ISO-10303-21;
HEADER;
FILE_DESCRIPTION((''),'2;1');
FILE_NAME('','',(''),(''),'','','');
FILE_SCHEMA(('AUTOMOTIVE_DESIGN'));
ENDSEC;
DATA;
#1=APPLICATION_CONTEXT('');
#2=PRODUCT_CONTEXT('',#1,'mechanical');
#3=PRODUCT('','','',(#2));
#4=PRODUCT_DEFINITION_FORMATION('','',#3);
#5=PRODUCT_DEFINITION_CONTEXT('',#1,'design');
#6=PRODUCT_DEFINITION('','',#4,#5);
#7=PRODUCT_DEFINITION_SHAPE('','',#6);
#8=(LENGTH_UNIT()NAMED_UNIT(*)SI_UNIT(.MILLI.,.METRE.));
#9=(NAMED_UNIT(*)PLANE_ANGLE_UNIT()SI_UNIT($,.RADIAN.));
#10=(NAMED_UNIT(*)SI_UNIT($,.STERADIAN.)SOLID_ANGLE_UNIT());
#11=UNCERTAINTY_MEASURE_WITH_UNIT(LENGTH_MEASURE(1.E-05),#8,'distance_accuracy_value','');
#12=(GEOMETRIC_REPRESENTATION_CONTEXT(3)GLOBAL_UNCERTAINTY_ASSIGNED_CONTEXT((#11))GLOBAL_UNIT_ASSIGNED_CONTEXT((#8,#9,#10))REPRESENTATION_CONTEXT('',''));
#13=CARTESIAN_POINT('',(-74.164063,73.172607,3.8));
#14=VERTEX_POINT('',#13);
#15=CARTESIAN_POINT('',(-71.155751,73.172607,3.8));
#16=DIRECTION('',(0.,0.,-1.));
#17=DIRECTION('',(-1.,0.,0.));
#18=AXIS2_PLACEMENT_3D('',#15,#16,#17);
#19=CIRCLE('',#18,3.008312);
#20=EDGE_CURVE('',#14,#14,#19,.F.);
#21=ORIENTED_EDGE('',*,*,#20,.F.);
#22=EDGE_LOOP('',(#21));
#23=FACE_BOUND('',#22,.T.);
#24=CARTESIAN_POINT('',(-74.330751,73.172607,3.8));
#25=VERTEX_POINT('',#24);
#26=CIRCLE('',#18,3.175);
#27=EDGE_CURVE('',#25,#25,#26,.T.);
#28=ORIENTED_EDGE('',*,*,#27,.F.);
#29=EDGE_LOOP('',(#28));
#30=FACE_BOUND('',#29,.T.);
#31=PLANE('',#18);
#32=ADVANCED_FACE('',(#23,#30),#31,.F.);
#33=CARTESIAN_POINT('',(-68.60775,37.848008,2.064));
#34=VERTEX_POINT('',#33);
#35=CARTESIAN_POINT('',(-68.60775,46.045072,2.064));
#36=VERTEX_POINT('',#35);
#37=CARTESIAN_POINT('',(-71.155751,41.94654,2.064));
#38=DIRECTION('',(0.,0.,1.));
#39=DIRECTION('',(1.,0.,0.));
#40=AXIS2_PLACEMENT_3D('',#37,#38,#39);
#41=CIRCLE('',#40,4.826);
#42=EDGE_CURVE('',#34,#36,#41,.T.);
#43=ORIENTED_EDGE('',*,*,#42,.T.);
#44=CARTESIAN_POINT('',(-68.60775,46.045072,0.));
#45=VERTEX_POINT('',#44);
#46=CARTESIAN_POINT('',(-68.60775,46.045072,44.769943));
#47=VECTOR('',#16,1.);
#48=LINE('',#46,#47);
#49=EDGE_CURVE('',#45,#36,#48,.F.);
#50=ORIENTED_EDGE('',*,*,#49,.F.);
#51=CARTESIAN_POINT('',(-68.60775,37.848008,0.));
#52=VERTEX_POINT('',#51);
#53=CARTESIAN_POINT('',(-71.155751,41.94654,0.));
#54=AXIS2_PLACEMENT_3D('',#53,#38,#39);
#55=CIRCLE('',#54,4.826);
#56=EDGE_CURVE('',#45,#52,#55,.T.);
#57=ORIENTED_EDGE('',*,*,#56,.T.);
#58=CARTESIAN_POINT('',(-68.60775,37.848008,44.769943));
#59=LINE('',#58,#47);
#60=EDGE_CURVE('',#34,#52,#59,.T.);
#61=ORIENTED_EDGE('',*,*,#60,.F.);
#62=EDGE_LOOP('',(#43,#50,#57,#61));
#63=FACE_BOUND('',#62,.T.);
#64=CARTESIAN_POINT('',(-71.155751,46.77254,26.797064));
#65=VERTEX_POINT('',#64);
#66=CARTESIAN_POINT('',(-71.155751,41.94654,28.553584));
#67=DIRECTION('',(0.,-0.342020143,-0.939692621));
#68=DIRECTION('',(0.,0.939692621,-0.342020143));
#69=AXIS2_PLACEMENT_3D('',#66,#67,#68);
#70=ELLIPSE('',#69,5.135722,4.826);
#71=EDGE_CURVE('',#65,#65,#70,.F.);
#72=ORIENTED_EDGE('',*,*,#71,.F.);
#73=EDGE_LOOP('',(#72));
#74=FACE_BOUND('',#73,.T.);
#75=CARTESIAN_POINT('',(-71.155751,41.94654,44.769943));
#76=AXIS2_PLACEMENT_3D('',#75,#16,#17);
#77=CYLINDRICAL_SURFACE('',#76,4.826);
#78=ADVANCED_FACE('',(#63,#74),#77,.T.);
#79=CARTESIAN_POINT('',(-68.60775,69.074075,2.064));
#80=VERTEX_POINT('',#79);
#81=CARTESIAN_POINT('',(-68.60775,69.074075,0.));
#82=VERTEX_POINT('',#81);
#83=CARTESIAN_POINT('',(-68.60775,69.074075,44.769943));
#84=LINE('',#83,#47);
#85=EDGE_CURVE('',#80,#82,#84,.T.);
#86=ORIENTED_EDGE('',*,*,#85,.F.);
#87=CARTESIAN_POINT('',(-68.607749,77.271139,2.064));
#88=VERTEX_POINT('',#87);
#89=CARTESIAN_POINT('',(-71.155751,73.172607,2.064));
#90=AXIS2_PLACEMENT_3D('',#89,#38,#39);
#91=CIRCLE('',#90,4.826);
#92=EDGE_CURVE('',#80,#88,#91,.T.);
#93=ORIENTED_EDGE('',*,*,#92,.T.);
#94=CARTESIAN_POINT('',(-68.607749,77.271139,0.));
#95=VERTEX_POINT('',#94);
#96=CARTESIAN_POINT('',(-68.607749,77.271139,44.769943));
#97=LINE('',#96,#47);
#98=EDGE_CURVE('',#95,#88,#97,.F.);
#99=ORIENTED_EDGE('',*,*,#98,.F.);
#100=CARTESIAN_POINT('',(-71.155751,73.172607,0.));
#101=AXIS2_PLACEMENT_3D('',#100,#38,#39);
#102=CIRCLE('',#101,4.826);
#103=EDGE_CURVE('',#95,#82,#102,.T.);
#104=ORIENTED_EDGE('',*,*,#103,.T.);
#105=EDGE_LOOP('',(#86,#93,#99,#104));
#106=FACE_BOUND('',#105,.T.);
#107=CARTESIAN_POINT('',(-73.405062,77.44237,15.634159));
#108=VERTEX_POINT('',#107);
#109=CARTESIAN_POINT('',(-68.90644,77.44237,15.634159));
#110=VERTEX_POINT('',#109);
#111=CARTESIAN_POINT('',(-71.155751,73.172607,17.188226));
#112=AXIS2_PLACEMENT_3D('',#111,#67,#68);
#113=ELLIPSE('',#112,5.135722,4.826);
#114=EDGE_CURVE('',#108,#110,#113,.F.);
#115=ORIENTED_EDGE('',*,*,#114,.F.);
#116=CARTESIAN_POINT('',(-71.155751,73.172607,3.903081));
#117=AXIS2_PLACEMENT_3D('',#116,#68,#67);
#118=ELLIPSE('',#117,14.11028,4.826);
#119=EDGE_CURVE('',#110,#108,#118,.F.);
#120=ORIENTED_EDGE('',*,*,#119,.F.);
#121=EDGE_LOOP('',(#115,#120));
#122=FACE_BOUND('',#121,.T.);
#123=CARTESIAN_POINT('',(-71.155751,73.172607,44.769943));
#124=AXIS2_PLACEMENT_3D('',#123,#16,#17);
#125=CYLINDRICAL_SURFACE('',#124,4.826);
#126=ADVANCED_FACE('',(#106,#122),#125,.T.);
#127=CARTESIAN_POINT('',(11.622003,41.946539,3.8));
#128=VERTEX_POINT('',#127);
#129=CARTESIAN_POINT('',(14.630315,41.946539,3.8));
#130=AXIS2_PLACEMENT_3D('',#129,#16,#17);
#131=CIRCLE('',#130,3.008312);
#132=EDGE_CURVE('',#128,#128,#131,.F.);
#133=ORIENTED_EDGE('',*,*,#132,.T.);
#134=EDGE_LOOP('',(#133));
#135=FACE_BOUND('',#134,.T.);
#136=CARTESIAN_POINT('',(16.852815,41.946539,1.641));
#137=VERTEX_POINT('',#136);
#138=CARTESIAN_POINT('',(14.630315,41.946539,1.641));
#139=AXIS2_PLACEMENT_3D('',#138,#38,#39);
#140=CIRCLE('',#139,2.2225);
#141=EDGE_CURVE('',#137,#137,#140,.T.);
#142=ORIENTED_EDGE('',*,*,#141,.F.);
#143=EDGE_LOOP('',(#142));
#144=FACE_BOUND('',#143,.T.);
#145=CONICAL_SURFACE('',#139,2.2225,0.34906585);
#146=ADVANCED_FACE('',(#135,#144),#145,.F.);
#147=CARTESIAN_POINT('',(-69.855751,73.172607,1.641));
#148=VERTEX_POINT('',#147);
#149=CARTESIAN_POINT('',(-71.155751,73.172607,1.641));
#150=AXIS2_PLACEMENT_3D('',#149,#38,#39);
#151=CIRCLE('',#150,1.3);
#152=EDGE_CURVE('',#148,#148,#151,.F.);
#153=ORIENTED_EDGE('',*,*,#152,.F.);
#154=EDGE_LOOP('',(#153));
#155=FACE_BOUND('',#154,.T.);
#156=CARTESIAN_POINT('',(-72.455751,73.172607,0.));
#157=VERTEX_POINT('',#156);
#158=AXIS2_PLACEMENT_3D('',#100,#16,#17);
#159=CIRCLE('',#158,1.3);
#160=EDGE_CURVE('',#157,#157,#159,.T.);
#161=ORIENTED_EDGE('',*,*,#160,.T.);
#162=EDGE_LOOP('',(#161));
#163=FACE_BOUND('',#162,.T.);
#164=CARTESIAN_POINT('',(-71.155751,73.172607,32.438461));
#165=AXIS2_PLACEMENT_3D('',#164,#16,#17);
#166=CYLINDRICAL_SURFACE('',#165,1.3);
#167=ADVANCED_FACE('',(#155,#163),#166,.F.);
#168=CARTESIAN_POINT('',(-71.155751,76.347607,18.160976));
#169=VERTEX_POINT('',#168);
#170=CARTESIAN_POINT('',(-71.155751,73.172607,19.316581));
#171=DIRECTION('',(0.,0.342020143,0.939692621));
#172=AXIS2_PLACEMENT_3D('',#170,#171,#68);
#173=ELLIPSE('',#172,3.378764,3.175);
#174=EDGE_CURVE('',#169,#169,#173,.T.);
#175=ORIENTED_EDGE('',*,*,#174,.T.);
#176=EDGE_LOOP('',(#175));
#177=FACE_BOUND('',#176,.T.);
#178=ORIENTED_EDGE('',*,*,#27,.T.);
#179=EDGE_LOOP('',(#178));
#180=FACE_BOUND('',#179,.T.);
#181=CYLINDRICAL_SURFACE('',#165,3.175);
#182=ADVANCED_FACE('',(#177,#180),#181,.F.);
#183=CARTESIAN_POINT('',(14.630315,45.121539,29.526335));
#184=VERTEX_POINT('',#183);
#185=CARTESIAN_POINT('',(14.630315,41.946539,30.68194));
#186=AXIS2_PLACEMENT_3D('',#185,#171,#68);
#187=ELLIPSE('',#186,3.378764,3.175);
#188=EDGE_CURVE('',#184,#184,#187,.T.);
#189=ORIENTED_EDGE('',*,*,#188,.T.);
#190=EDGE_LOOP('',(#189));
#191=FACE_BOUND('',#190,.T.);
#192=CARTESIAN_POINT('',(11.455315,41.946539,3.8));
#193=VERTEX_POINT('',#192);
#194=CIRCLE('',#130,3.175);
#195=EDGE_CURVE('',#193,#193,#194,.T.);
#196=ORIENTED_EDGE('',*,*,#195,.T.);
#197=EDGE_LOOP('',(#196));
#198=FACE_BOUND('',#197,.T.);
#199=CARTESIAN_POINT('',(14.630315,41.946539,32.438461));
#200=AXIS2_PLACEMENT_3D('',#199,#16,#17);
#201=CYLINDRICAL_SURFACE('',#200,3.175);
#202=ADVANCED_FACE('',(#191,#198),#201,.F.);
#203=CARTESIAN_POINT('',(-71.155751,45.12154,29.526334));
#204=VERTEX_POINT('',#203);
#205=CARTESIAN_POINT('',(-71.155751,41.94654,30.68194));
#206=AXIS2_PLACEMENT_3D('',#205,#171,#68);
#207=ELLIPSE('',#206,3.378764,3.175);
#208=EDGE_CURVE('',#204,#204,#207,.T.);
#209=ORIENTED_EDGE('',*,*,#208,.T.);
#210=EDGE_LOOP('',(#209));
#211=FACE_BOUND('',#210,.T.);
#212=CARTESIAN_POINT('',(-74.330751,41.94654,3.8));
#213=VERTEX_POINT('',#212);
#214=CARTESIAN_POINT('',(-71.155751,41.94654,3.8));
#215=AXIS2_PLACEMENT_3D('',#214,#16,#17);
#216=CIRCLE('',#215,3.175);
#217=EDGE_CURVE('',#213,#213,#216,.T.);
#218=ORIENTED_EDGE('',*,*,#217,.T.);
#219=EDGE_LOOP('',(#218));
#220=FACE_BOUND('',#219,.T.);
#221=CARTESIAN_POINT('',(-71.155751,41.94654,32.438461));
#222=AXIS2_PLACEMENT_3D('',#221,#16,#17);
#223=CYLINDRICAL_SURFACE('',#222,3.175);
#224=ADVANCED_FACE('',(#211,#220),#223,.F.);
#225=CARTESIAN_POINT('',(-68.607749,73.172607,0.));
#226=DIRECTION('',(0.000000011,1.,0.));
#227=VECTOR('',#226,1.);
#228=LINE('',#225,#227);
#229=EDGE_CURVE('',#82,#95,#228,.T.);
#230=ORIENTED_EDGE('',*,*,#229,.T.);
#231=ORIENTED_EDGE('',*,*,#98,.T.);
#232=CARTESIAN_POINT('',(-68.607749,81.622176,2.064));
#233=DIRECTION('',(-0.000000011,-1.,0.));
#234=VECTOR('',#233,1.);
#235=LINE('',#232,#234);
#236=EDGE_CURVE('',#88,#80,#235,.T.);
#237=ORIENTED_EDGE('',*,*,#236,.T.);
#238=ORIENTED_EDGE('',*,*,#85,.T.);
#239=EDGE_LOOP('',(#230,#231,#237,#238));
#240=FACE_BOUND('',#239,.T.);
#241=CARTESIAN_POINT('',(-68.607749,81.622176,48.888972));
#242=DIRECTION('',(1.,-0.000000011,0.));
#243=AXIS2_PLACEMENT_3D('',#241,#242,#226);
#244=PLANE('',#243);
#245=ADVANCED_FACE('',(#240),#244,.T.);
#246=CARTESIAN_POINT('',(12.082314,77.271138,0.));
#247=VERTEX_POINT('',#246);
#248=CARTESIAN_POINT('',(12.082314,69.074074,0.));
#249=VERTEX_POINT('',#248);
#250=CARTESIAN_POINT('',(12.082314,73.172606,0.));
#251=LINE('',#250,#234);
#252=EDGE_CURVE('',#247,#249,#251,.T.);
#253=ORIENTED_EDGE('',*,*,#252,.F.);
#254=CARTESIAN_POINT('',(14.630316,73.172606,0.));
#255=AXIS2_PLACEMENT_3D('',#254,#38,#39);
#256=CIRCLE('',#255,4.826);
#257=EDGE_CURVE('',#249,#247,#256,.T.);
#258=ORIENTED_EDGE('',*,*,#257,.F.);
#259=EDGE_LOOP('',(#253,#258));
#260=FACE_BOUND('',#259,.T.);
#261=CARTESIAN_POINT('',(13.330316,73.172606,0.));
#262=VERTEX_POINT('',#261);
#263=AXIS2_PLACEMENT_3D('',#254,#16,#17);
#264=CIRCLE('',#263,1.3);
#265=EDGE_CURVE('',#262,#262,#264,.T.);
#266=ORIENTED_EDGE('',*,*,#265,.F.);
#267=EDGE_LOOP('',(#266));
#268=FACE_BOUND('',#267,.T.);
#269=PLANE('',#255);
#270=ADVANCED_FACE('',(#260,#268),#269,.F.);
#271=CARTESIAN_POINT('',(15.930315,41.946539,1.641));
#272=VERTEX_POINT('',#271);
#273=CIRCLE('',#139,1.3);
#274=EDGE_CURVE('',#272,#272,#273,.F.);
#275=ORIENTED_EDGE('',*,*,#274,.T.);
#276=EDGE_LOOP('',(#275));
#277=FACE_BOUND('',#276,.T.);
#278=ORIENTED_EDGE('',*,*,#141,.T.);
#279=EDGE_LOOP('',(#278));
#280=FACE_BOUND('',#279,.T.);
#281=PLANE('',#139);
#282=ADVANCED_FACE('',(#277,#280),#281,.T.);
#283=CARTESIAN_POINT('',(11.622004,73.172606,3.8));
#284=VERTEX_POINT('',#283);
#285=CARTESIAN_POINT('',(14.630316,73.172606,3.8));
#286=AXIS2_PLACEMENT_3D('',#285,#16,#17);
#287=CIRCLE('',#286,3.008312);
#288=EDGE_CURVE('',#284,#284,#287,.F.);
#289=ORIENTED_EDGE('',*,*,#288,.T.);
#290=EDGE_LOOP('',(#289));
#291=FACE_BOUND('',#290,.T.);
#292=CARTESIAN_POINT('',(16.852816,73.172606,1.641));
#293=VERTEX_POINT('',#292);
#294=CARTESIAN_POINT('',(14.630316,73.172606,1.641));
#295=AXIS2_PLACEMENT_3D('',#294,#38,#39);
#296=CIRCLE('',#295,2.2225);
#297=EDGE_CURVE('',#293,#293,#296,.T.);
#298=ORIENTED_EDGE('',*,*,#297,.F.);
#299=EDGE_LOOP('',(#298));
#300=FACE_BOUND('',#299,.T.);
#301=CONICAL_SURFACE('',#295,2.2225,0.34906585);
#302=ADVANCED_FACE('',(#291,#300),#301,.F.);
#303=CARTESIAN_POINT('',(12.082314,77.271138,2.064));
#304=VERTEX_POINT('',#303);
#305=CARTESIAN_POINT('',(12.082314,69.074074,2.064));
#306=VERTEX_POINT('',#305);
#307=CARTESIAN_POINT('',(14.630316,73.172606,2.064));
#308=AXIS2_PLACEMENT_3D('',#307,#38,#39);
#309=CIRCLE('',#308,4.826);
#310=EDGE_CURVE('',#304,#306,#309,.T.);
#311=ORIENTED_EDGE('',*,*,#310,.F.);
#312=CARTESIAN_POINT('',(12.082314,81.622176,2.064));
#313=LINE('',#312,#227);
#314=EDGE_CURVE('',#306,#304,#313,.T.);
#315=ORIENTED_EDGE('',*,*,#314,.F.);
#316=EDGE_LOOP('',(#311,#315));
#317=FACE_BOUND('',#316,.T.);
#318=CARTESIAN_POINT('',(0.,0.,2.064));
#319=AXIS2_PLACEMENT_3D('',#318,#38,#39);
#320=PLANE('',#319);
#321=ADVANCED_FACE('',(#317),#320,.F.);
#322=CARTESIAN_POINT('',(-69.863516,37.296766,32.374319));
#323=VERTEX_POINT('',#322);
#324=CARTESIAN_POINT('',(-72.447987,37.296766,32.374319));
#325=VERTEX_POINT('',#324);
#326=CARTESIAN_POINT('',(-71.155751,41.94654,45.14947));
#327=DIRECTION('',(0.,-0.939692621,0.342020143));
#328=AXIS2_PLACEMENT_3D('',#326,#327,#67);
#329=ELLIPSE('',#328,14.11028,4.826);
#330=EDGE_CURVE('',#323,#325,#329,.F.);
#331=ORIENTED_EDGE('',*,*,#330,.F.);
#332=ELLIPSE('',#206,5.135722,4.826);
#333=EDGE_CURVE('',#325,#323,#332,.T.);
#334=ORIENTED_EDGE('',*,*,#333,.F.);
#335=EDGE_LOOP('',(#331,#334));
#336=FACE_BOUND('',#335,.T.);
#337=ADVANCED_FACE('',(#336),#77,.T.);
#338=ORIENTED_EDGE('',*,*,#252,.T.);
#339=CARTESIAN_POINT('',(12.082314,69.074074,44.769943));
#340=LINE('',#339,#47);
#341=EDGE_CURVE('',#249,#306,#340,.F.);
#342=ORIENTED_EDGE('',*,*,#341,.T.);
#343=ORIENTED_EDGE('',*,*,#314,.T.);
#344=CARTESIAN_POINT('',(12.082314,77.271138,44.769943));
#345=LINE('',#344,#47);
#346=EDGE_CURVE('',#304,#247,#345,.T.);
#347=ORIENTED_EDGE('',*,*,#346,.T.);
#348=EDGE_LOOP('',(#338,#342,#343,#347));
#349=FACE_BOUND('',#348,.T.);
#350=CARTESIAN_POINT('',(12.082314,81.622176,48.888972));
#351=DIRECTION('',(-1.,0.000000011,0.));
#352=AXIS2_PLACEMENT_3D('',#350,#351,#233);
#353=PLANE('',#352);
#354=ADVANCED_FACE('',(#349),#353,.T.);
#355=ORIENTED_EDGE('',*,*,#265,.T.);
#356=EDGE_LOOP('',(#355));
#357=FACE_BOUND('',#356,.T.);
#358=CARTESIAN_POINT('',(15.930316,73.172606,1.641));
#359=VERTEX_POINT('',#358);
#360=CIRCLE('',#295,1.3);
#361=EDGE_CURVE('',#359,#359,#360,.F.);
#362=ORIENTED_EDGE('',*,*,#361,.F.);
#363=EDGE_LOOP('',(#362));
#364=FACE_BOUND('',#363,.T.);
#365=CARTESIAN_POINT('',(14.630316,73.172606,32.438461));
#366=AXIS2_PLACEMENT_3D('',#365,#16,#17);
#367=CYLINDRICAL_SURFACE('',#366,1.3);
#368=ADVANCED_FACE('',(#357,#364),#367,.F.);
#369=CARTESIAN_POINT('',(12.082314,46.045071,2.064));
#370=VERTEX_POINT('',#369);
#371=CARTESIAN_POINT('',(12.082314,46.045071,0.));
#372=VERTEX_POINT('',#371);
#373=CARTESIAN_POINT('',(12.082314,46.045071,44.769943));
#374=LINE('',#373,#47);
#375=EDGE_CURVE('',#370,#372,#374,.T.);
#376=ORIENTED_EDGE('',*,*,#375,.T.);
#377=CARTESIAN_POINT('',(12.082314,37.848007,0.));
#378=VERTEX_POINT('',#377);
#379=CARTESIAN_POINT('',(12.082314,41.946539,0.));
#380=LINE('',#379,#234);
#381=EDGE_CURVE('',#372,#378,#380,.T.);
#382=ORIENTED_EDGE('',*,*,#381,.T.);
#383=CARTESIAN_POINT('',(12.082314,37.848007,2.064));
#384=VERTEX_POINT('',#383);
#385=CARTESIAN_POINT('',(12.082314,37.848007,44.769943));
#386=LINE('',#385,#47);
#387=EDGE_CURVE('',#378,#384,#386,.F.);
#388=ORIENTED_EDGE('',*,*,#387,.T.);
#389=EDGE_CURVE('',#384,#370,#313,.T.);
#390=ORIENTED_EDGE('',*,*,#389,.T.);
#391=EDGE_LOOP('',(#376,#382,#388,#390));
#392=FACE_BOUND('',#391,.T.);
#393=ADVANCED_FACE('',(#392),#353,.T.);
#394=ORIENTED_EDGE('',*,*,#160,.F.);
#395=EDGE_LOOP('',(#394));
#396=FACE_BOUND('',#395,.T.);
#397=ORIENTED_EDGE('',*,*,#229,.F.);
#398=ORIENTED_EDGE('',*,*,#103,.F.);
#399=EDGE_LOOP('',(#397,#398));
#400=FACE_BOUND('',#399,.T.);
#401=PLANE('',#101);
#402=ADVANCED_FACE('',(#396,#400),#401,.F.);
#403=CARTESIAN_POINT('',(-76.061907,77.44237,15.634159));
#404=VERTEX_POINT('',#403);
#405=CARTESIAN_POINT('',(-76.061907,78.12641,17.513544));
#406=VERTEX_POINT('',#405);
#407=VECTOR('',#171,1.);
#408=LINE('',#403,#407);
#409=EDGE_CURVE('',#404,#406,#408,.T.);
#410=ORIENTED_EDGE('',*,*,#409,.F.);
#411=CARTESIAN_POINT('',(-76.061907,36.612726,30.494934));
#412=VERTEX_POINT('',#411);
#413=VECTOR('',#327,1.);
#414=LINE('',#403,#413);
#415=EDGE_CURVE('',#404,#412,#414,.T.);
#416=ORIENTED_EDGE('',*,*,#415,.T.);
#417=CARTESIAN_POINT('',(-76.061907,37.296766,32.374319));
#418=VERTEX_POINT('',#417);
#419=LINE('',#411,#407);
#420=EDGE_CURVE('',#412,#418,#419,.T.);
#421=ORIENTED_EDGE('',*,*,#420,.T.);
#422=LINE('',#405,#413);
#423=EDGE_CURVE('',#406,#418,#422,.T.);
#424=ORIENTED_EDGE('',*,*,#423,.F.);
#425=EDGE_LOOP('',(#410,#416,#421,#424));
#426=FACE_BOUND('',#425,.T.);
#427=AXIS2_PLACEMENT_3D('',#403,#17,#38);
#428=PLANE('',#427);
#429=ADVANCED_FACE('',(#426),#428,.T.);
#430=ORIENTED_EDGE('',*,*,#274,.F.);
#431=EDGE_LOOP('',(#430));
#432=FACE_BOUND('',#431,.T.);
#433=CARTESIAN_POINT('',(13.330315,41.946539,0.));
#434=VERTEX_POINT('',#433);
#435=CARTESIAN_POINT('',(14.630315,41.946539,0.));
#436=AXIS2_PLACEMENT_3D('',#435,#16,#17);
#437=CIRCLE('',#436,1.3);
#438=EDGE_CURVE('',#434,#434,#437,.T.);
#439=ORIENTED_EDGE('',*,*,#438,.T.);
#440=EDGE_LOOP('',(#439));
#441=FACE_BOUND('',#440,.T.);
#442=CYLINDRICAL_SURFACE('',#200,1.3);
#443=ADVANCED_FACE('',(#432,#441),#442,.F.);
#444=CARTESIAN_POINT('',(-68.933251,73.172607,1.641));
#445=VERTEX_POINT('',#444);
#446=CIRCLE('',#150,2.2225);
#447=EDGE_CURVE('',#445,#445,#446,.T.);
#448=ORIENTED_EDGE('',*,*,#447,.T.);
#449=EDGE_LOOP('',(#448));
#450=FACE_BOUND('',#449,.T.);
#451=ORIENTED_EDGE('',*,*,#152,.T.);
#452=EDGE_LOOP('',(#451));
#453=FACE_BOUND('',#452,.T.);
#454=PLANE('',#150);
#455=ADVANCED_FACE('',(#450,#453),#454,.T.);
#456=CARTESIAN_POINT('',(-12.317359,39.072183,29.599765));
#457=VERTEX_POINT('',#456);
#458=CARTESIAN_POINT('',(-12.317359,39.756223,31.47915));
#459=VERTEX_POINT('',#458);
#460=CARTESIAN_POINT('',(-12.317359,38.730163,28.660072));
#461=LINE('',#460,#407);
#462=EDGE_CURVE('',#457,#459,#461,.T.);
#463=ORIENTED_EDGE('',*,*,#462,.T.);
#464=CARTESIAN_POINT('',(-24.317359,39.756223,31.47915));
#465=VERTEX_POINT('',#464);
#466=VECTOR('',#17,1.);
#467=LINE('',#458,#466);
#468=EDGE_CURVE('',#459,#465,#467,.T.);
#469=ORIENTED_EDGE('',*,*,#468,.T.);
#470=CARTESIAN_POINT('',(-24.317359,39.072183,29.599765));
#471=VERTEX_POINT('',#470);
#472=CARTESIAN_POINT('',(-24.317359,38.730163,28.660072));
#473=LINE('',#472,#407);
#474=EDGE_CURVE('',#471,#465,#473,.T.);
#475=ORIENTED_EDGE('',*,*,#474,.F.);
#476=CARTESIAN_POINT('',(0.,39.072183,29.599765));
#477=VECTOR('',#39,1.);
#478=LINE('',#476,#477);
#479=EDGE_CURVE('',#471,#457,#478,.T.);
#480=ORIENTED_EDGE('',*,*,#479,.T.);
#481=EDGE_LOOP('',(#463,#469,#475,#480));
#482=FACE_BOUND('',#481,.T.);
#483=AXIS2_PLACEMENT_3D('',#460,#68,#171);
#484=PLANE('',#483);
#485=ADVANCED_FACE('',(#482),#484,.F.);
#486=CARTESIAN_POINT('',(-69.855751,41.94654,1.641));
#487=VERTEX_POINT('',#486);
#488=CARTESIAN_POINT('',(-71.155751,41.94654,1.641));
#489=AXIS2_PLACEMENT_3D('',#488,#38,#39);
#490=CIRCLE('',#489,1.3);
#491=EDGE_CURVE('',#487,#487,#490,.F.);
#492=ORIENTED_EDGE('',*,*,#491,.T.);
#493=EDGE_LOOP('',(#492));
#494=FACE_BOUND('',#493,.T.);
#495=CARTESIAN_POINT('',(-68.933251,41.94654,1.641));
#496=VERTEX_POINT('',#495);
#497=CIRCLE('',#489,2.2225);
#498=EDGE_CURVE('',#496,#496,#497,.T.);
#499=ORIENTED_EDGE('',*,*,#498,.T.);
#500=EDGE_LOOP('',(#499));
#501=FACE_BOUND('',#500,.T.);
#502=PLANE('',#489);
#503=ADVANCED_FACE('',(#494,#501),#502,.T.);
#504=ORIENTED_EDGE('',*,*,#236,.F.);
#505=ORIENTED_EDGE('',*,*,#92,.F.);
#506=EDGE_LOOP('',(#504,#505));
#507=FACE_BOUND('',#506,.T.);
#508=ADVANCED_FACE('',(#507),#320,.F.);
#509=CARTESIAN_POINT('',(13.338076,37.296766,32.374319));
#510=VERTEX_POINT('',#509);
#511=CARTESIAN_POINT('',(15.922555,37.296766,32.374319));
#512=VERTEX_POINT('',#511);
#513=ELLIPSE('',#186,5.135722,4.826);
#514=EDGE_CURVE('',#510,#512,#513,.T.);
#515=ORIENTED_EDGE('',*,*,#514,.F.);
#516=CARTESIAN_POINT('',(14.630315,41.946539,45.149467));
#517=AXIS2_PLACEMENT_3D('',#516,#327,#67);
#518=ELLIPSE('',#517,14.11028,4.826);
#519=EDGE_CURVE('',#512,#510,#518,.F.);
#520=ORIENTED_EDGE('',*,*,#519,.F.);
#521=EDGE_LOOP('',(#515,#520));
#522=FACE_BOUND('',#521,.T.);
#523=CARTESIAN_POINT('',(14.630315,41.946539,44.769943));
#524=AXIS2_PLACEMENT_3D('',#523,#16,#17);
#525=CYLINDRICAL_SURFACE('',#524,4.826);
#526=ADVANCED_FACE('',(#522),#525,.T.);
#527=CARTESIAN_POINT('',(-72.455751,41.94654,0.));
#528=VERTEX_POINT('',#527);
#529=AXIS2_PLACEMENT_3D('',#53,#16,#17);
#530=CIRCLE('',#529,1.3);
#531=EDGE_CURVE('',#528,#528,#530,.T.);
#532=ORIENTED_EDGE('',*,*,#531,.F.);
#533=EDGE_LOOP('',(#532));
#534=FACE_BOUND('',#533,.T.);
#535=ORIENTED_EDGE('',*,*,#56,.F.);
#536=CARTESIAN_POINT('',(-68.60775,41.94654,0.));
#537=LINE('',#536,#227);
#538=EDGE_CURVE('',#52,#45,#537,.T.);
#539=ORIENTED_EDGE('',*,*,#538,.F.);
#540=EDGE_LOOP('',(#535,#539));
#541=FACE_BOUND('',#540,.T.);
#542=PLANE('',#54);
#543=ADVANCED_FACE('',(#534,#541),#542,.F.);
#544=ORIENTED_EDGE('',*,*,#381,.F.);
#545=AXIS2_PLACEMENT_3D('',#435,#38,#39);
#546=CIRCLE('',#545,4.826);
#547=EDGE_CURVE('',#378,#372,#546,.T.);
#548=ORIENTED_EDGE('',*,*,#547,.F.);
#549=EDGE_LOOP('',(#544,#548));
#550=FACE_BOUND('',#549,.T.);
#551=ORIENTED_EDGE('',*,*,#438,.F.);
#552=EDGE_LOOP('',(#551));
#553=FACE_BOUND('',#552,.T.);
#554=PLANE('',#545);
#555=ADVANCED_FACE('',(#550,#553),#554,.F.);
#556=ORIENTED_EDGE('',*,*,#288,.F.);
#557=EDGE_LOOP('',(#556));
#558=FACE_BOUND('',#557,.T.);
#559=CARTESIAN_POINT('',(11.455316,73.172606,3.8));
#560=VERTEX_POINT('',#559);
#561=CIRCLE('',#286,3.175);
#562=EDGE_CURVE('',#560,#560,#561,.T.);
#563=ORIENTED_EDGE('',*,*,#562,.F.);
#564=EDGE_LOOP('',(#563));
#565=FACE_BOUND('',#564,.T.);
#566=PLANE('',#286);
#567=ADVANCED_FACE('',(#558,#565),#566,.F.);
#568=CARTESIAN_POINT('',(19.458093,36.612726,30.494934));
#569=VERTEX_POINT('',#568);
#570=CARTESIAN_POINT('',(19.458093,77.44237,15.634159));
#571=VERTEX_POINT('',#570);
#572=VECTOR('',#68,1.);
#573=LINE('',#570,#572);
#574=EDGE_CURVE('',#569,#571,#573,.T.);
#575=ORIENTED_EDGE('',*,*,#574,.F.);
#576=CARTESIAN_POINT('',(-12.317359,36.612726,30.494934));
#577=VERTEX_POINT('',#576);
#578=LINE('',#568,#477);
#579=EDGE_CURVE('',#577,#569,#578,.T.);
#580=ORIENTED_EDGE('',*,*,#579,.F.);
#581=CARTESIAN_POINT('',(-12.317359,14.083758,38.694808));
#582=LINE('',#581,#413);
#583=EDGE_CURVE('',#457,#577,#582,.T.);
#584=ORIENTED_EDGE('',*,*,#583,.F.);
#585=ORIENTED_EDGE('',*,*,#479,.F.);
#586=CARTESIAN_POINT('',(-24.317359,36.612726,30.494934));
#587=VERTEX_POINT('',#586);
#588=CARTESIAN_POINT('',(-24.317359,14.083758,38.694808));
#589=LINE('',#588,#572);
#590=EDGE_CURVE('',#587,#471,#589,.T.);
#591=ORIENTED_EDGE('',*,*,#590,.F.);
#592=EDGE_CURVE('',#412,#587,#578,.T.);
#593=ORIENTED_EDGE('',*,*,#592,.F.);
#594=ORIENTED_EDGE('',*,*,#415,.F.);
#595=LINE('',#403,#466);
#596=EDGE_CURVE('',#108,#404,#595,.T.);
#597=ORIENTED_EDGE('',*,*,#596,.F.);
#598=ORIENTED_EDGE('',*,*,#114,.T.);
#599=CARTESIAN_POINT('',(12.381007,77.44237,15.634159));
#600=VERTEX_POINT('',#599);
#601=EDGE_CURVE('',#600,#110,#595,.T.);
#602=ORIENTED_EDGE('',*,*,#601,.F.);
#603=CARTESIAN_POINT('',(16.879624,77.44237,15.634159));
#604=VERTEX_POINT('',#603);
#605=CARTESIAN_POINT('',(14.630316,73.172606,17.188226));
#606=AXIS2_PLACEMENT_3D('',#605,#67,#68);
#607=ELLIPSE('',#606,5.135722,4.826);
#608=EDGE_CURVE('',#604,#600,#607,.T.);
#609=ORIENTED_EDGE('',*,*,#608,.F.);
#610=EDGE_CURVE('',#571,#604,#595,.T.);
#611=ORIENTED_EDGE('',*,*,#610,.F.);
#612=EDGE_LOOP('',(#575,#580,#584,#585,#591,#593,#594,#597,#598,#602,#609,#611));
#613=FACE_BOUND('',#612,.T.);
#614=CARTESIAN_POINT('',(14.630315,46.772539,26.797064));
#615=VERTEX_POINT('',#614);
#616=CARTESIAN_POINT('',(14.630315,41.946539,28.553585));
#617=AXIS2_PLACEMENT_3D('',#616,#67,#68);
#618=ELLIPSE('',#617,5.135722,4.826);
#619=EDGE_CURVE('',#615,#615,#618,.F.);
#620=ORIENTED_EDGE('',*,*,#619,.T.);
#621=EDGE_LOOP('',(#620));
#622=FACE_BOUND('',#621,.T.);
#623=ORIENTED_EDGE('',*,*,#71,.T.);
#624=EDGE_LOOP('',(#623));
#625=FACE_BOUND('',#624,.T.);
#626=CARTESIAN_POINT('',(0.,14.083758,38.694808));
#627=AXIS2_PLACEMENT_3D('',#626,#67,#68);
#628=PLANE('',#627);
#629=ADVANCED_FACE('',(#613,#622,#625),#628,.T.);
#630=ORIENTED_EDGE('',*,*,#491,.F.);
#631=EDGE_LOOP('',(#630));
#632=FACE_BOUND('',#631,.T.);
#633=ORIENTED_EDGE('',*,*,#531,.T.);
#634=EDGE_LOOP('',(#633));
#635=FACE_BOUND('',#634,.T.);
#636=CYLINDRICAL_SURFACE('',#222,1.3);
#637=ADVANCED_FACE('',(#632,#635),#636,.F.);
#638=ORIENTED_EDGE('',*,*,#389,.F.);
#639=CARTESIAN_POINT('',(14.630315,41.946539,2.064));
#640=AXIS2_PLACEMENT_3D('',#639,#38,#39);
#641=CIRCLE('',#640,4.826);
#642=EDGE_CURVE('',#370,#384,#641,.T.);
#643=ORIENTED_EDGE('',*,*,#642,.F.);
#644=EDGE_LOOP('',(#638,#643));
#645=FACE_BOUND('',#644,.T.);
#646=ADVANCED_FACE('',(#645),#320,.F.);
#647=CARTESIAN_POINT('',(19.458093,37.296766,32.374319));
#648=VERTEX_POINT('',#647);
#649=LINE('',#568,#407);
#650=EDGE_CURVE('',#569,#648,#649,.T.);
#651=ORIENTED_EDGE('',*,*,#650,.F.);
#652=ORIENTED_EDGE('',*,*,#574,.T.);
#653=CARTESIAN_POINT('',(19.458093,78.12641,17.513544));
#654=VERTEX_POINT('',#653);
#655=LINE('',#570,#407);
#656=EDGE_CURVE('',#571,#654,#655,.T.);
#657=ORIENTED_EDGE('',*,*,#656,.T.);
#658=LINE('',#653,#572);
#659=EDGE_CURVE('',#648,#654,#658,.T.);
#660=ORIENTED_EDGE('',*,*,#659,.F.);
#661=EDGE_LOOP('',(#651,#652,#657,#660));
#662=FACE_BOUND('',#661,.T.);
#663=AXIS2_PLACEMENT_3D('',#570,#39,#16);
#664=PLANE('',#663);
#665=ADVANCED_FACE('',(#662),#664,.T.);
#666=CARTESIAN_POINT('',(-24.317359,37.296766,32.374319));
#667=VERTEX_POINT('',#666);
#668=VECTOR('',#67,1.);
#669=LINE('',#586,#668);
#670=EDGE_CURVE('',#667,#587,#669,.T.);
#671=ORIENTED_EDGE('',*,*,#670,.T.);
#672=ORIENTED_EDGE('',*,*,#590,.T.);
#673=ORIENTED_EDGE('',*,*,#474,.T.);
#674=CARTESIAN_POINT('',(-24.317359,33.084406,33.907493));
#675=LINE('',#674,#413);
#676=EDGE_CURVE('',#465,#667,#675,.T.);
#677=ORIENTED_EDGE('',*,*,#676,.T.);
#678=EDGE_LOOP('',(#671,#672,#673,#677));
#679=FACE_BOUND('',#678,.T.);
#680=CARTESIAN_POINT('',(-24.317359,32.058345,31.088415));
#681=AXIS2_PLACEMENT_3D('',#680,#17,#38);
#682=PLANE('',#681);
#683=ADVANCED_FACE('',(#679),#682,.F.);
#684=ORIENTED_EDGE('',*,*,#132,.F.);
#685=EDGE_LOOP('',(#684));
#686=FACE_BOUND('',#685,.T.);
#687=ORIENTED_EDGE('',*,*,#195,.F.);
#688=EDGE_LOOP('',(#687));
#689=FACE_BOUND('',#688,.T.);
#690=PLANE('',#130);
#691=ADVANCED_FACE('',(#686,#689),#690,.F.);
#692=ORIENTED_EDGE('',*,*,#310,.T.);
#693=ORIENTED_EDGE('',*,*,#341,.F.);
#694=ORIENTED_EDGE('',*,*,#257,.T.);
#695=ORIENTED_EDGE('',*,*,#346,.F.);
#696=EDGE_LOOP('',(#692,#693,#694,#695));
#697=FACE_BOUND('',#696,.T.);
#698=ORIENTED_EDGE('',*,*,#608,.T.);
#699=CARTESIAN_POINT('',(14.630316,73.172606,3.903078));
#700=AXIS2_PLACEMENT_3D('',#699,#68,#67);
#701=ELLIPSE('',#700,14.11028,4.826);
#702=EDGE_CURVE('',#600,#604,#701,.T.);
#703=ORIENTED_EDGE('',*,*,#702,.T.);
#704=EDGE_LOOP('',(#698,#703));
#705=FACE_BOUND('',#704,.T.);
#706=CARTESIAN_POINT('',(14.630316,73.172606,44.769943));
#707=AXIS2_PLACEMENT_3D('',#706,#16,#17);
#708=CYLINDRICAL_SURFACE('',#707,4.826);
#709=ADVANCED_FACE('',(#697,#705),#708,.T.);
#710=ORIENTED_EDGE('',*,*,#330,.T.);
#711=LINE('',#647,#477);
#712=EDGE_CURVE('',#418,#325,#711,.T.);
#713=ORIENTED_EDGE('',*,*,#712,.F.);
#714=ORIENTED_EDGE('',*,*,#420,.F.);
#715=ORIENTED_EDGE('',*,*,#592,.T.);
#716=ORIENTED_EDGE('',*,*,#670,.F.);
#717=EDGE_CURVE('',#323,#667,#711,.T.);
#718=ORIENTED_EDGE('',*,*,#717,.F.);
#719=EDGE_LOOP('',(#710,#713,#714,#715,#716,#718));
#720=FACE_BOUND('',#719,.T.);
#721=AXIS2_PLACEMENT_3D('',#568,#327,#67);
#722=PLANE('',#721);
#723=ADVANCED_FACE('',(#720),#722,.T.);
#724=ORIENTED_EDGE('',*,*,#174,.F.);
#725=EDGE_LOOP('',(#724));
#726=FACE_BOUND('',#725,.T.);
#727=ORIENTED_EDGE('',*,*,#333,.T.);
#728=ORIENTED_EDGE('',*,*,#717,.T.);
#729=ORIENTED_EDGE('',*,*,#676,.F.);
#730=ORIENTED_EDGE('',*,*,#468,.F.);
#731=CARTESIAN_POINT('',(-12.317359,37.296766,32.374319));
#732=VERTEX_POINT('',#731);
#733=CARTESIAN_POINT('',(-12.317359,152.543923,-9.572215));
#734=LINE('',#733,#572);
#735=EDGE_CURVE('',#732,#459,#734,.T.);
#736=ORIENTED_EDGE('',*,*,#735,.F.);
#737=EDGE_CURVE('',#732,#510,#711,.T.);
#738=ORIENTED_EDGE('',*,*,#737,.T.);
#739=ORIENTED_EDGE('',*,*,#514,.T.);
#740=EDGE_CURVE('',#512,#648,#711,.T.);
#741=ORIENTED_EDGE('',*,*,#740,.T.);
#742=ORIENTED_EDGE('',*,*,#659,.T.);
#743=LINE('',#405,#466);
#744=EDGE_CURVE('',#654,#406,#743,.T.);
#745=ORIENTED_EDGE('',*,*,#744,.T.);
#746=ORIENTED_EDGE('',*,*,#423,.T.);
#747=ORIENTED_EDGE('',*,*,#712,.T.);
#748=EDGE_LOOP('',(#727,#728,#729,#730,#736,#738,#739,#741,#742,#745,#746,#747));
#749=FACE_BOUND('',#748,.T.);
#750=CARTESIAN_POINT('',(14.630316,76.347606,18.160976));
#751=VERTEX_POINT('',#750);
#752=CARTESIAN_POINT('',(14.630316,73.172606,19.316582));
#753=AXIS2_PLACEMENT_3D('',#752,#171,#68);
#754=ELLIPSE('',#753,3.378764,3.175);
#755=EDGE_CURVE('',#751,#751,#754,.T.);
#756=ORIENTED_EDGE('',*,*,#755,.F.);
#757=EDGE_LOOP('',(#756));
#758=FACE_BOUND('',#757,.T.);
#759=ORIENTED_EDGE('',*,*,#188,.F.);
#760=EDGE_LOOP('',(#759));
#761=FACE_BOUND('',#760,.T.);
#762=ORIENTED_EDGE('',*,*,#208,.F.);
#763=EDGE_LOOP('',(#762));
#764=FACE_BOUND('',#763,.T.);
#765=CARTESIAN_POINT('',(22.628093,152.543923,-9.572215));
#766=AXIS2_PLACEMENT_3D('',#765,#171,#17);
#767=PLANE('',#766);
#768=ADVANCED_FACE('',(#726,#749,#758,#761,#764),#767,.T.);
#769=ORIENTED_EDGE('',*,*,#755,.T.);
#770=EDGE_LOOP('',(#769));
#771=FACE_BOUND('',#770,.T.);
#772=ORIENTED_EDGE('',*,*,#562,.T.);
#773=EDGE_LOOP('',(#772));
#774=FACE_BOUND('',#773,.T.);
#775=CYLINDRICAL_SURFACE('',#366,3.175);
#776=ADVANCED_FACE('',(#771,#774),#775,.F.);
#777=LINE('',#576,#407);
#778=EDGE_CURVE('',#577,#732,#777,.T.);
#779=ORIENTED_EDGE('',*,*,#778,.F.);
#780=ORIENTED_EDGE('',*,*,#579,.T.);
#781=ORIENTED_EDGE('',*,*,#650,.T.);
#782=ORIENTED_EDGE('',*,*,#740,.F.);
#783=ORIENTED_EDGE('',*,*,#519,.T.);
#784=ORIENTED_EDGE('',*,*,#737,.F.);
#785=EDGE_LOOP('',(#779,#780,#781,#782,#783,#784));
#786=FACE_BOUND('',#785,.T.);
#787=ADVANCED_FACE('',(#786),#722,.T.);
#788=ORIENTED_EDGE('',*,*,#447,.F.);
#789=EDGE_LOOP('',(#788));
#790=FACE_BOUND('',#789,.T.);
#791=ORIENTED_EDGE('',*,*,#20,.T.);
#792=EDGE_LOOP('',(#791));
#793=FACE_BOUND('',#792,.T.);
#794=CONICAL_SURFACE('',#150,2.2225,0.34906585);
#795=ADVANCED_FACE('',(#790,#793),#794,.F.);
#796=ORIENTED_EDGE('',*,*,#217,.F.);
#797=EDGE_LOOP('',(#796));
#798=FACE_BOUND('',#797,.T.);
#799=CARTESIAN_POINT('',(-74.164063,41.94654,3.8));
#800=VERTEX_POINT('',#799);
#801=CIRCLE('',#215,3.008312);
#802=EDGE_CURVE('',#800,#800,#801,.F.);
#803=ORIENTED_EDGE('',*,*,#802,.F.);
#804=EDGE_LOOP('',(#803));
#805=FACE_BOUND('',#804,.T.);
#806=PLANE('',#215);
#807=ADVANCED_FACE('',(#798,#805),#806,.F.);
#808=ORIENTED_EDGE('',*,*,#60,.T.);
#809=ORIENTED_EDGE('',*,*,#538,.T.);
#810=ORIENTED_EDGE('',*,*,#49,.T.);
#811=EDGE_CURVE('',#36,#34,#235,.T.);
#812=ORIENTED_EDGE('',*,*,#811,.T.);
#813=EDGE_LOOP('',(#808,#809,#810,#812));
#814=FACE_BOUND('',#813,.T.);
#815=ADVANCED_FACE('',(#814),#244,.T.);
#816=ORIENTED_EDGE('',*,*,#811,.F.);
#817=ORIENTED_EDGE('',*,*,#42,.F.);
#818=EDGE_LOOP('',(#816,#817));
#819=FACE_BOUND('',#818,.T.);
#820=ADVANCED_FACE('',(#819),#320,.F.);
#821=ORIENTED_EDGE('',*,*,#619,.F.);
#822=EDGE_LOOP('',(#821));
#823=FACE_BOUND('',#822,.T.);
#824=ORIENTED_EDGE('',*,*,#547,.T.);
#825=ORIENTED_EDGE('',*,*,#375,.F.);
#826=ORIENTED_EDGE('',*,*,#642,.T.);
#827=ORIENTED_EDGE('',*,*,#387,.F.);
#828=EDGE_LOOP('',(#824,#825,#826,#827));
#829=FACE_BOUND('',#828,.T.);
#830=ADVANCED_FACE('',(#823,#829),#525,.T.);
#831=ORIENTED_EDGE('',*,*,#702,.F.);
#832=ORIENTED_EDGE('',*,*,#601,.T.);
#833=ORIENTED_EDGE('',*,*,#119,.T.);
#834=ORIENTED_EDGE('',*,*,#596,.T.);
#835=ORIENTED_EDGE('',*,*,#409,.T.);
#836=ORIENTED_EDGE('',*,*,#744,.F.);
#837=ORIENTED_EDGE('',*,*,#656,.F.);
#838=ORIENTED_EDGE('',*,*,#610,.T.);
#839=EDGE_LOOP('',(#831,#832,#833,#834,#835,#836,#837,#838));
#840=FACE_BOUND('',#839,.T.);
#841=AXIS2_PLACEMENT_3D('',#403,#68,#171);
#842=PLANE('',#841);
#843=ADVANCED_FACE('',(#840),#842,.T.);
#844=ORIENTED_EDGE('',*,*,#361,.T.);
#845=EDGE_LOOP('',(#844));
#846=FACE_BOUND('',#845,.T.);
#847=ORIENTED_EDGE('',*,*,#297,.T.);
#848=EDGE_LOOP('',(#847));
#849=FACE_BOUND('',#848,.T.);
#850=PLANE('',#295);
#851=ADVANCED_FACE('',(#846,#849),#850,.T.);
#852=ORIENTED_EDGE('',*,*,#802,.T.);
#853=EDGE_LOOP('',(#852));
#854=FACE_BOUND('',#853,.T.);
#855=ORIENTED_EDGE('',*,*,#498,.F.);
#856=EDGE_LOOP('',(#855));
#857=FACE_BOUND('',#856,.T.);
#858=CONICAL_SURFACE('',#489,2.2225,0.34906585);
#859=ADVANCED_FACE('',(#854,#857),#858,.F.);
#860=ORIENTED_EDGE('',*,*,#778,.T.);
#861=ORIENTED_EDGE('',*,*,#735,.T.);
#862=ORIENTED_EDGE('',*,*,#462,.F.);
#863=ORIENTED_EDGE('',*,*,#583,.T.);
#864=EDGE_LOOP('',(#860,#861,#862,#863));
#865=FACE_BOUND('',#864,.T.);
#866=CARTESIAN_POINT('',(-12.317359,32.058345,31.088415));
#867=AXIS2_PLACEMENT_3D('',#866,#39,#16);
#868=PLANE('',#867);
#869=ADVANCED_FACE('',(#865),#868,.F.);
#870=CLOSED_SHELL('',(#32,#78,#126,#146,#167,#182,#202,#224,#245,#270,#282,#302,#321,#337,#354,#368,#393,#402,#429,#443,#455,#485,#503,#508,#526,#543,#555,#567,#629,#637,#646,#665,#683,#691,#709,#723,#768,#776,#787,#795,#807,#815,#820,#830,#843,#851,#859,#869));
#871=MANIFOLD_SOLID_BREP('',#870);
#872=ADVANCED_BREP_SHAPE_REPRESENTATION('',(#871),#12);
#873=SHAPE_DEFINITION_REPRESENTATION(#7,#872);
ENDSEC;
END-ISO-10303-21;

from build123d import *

# Parameters (mm, degrees)
LCD_MOUNT_TUBE_OUTLINE_R          = 4.826
LCD_MOUNT_TUBE_DEPTH              = 17.560061263
LCD_START                         = 17.560061263
LCD_MOUNT_TUBE_2_OUTLINE_R        = 4.826
LCD_MOUNT_TUBE_2_DEPTH            = 3.513040701
LCD_START_2                       = 43.178154287
LCD_MOUNT_TUBE_3_OUTLINE_W        = 13
LCD_MOUNT_TUBE_3_OUTLINE_H        = 13
LCD_MOUNT_TUBE_3_DEPTH            = 3.821845713
LCD_MOUNT_TUBE_4_OUTLINE_R        = 4.826
LCD_MOUNT_TUBE_4_DEPTH            = 17.560060851
LCD_START_3                       = 17.560060851
LCD_MOUNT_TUBE_5_OUTLINE_R        = 4.826
LCD_MOUNT_TUBE_5_DEPTH            = 3.513040701
LCD_MOUNT_TUBE_6_OUTLINE_W        = 12
LCD_MOUNT_TUBE_6_OUTLINE_H        = 13
LCD_MOUNT_TUBE_6_DEPTH            = 3.821845713
LCD_MOUNT_TUBE_7_OUTLINE_R        = 4.826
LCD_MOUNT_TUBE_7_DEPTH            = 28.925419555
LCD_START_4                       = 28.925419555
LCD_MOUNT_TUBE_8_OUTLINE_R        = 4.826
LCD_MOUNT_TUBE_8_DEPTH            = 3.513040701
LCD_MOUNT_TUBE_9_OUTLINE_W        = 12
LCD_MOUNT_TUBE_9_OUTLINE_H        = 14
LCD_MOUNT_TUBE_9_DEPTH            = 3.821845713
LCD_MOUNT_TUBE_10_OUTLINE_R       = 4.826
LCD_MOUNT_TUBE_10_DEPTH           = 28.925419967
LCD_START_5                       = 28.925419967
LCD_MOUNT_TUBE_11_OUTLINE_R       = 4.826
LCD_MOUNT_TUBE_11_DEPTH           = 3.513040701
LCD_MOUNT_TUBE_12_OUTLINE_W       = 13
LCD_MOUNT_TUBE_12_OUTLINE_H       = 14
LCD_MOUNT_TUBE_12_DEPTH           = 3.821845713
TUBE_PCB_INTERFERENCE_DEPTH       = 2.064
SKETCH3_R                         = 1.3
SCREW_HOLE_DEPTH                  = 114.618937328
SKETCH4_W                         = 95.52
SKETCH4_H                         = 43.45
BACK_PLATE_DEPTH                  = 2
HOLLOW_START                      = -3.8
SKETCH2_R                         = 3.175
HOLLOW_TUBE_DEPTH                 = 110.960288991
SKETCH7_W                         = 12
SKETCH7_H                         = 7.1
USB_CLEARANCE_DEPTH               = 3
SCREW_CATCHING_FUNNEL_OUTLINE_R   = 2.2225
SCREW_CATCHING_FUNNEL_DEPTH       = 2.159
SCREW_CATCHING_FUNNEL_DRAFT       = -20
SCREW_CATCHING_FUNNEL_2_OUTLINE_R = 2.2225
SCREW_CATCHING_FUNNEL_2_DEPTH     = 2.159
SCREW_CATCHING_FUNNEL_2_DRAFT     = -20
SCREW_CATCHING_FUNNEL_3_OUTLINE_R = 2.2225
SCREW_CATCHING_FUNNEL_3_DEPTH     = 2.159
SCREW_CATCHING_FUNNEL_3_DRAFT     = -20
SCREW_CATCHING_FUNNEL_4_OUTLINE_R = 2.2225
SCREW_CATCHING_FUNNEL_4_DEPTH     = 2.159
SCREW_CATCHING_FUNNEL_4_DRAFT     = -20


with BuildPart() as part:
    # LCD mount tube: read off the stored shape, not the designer's step
    # LCD mount tube outline → LCD mount tube (new body)
    with BuildSketch(Plane.XY):
        with Locations((14.630315517, 73.17260569)):
            Circle(LCD_MOUNT_TUBE_OUTLINE_R)
    extrude(amount=LCD_MOUNT_TUBE_DEPTH)

    # LCD mount tube 2 outline → LCD mount tube 2 (add)
    with BuildSketch(Plane.XY.offset(LCD_START)):
        with Locations((14.630315517, 73.17260569)):
            Circle(LCD_MOUNT_TUBE_2_OUTLINE_R)
    extrude(amount=LCD_MOUNT_TUBE_2_DEPTH)

    # LCD mount tube 3 outline → LCD mount tube 3 (cut)
    with BuildSketch(Plane(origin=(0, 0, 0), x_dir=(1, 0, 0), z_dir=(0, 0.3420201433257131, 0.9396926207858923)).offset(LCD_START_2)):
        with Locations((14.5, 62.5)):
            Rectangle(LCD_MOUNT_TUBE_3_OUTLINE_W, LCD_MOUNT_TUBE_3_OUTLINE_H)
    extrude(amount=LCD_MOUNT_TUBE_3_DEPTH, mode=Mode.SUBTRACT)


with BuildPart() as body_2:
    # LCD mount tube 4 outline → LCD mount tube 4 (new body)
    with BuildSketch(Plane.XY):
        with Locations((-71.155750897, 73.172606822)):
            Circle(LCD_MOUNT_TUBE_4_OUTLINE_R)
    extrude(amount=LCD_MOUNT_TUBE_4_DEPTH)

    # LCD mount tube 5 outline → LCD mount tube 5 (add)
    with BuildSketch(Plane.XY.offset(LCD_START_3)):
        with Locations((-71.155750897, 73.172606822)):
            Circle(LCD_MOUNT_TUBE_5_OUTLINE_R)
    extrude(amount=LCD_MOUNT_TUBE_5_DEPTH)

    # LCD mount tube 6 outline → LCD mount tube 6 (cut)
    with BuildSketch(Plane(origin=(0, 0, 0), x_dir=(1, 0, 0), z_dir=(0, 0.3420201433257131, 0.9396926207858923)).offset(LCD_START_2)):
        with Locations((-71, 62.5)):
            Rectangle(LCD_MOUNT_TUBE_6_OUTLINE_W, LCD_MOUNT_TUBE_6_OUTLINE_H)
    extrude(amount=LCD_MOUNT_TUBE_6_DEPTH, mode=Mode.SUBTRACT)


with BuildPart() as body_3:
    # LCD mount tube 7 outline → LCD mount tube 7 (new body)
    with BuildSketch(Plane.XY):
        with Locations((-71.155751248, 41.946540419)):
            Circle(LCD_MOUNT_TUBE_7_OUTLINE_R)
    extrude(amount=LCD_MOUNT_TUBE_7_DEPTH)

    # LCD mount tube 8 outline → LCD mount tube 8 (add)
    with BuildSketch(Plane.XY.offset(LCD_START_4)):
        with Locations((-71.155751248, 41.946540419)):
            Circle(LCD_MOUNT_TUBE_8_OUTLINE_R)
    extrude(amount=LCD_MOUNT_TUBE_8_DEPTH)

    # LCD mount tube 9 outline → LCD mount tube 9 (cut)
    with BuildSketch(Plane(origin=(0, 0, 0), x_dir=(1, 0, 0), z_dir=(0, 0.3420201433257131, 0.9396926207858923)).offset(LCD_START_2)):
        with Locations((-71, 29)):
            Rectangle(LCD_MOUNT_TUBE_9_OUTLINE_W, LCD_MOUNT_TUBE_9_OUTLINE_H)
    extrude(amount=LCD_MOUNT_TUBE_9_DEPTH, mode=Mode.SUBTRACT)


with BuildPart() as body_4:
    # LCD mount tube 10 outline → LCD mount tube 10 (new body)
    with BuildSketch(Plane.XY):
        with Locations((14.630315166, 41.946539286)):
            Circle(LCD_MOUNT_TUBE_10_OUTLINE_R)
    extrude(amount=LCD_MOUNT_TUBE_10_DEPTH)

    # LCD mount tube 11 outline → LCD mount tube 11 (add)
    with BuildSketch(Plane.XY.offset(LCD_START_5)):
        with Locations((14.630315166, 41.946539286)):
            Circle(LCD_MOUNT_TUBE_11_OUTLINE_R)
    extrude(amount=LCD_MOUNT_TUBE_11_DEPTH)

    # LCD mount tube 12 outline → LCD mount tube 12 (cut)
    with BuildSketch(Plane(origin=(0, 0, 0), x_dir=(1, 0, 0), z_dir=(0, 0.3420201433257131, 0.9396926207858923)).offset(LCD_START_2)):
        with Locations((14.5, 29)):
            Rectangle(LCD_MOUNT_TUBE_12_OUTLINE_W, LCD_MOUNT_TUBE_12_OUTLINE_H)
    extrude(amount=LCD_MOUNT_TUBE_12_DEPTH, mode=Mode.SUBTRACT)


with BuildPart() as tube_pcb_interference_tool:
    # Sketch5 → tube PCB interference (new body)
    with BuildSketch(Plane.XY):
        Polygon((12.082314183, 81.622175529), (8.870527881, 81.622175529), (8.870527362, 35.408676422), (12.082313664, 35.408676422), align=None)
        Polygon((-65.395963072, 81.622175529), (-68.607749373, 81.622175529), (-68.607749893, 35.408676422), (-65.395963591, 35.408676422), align=None)
    extrude(amount=TUBE_PCB_INTERFERENCE_DEPTH)


with BuildPart() as part_1:
    add(part.part)

    # tube PCB interference: cut by tube_pcb_interference_tool
    add(tube_pcb_interference_tool.part, mode=Mode.SUBTRACT)


with BuildPart() as body_2_1:
    add(body_2.part)

    # tube PCB interference: cut by tube_pcb_interference_tool
    add(tube_pcb_interference_tool.part, mode=Mode.SUBTRACT)


with BuildPart() as body_3_1:
    add(body_3.part)

    # tube PCB interference: cut by tube_pcb_interference_tool
    add(tube_pcb_interference_tool.part, mode=Mode.SUBTRACT)


with BuildPart() as body_4_1:
    add(body_4.part)

    # tube PCB interference: cut by tube_pcb_interference_tool
    add(tube_pcb_interference_tool.part, mode=Mode.SUBTRACT)


with BuildPart() as screw_hole_tool:
    # Sketch3 → screw hole (new, through all)
    with BuildSketch(Plane(origin=(0, 0, 0), x_dir=(-1, 0, 0), z_dir=(0, 0, -1))):
        with Locations((71.155750897, 73.172606822)):
            Circle(SKETCH3_R)
        with Locations((71.155751248, 41.946540419)):
            Circle(SKETCH3_R)
        with Locations((-14.630315166, 41.946539286)):
            Circle(SKETCH3_R)
        with Locations((-14.630315517, 73.17260569)):
            Circle(SKETCH3_R)
    extrude(amount=-SCREW_HOLE_DEPTH)


with BuildPart() as part_2:
    add(part_1.part)

    # screw hole: cut by screw_hole_tool
    add(screw_hole_tool.part, mode=Mode.SUBTRACT)



with BuildPart() as body_2_2:
    add(body_2_1.part)

    # screw hole: cut by screw_hole_tool
    add(screw_hole_tool.part, mode=Mode.SUBTRACT)


with BuildPart() as body_3_2:
    add(body_3_1.part)

    # screw hole: cut by screw_hole_tool
    add(screw_hole_tool.part, mode=Mode.SUBTRACT)


with BuildPart() as body_4_2:
    add(body_4_1.part)

    # screw hole: cut by screw_hole_tool
    add(screw_hole_tool.part, mode=Mode.SUBTRACT)


with BuildPart() as part_3:
    add(part_2.part)

    add(body_2_2.part)  # back plate merges body 2

    add(body_3_2.part)  # back plate merges body 3

    add(body_4_2.part)  # back plate merges body 4
    # Sketch4 → back plate (add)
    with BuildSketch(Plane(origin=(0, 14.767798518, 40.574192962), x_dir=(1, 0, 0), z_dir=(-8.110156480009166e-14, 0.3420201433257126, 0.9396926207858924))):
        with Locations((-28.301906678, 45.699826265)):
            Rectangle(SKETCH4_W, SKETCH4_H)
    extrude(amount=-BACK_PLATE_DEPTH)

    # Sketch2 → hollow tube (cut, through all)
    with BuildSketch(Plane(origin=(0, 0, 0), x_dir=(-1, 0, 0), z_dir=(0, 0, -1)).offset(HOLLOW_START)):
        with Locations((71.155750897, 73.172606822)):
            Circle(SKETCH2_R)
        with Locations((71.155751248, 41.946540419)):
            Circle(SKETCH2_R)
        with Locations((-14.630315166, 41.946539286)):
            Circle(SKETCH2_R)
        with Locations((-14.630315517, 73.17260569)):
            Circle(SKETCH2_R)
    extrude(amount=-HOLLOW_TUBE_DEPTH, mode=Mode.SUBTRACT)

    # Sketch7 → USB clearance (cut)
    with BuildSketch(Plane(origin=(0, 14.767798518, 40.574192962), x_dir=(1, 0, 0), z_dir=(-8.110156480009166e-14, 0.3420201433257126, 0.9396926207858924))):
        with Locations((-18.317358646, 23.042126287)):
            Rectangle(SKETCH7_W, SKETCH7_H)
    extrude(amount=-USB_CLEARANCE_DEPTH, mode=Mode.SUBTRACT)


with BuildPart() as screw_catching_funnel_tool:
    # screw catching funnel: read off the stored shape, not the designer's step
    # screw catching funnel outline → screw catching funnel (with draft: the straight prism first)
    with BuildSketch(Plane.XY.offset(1.641)):
        with Locations((14.630315517, 73.17260569)):
            Circle(SCREW_CATCHING_FUNNEL_OUTLINE_R)
        with BuildLine():
            ThreePointArc((13.330315517, 73.17260569), (14.630315517, 74.47260569), (15.930315517, 73.17260569))
            ThreePointArc((15.930315517, 73.17260569), (14.630315517, 71.87260569), (13.330315517, 73.17260569))
        make_face(mode=Mode.SUBTRACT)
    extrude(amount=SCREW_CATCHING_FUNNEL_DEPTH)
    # screw catching funnel: the draft: its side faces are tilted about the plane it starts from
    screw_catching_funnel_sides = [screw_catching_funnel_tool.faces().sort_by_distance(p)[0] for p in [
        (12.407815517, 73.17260569, 2.7205),
        (13.330315517, 73.17260569, 2.7205),
    ]]
    draft(screw_catching_funnel_sides, Plane.XY.offset(1.641), SCREW_CATCHING_FUNNEL_DRAFT)


with BuildPart() as part_4:
    add(part_3.part)

    # screw catching funnel: cut by screw_catching_funnel_tool
    add(screw_catching_funnel_tool.part, mode=Mode.SUBTRACT)


with BuildPart() as screw_catching_funnel_2_tool:
    # screw catching funnel 2 outline → screw catching funnel 2 (with draft: the straight prism first)
    with BuildSketch(Plane.XY.offset(1.641)):
        with Locations((14.630315166, 41.946539286)):
            Circle(SCREW_CATCHING_FUNNEL_2_OUTLINE_R)
        with BuildLine():
            ThreePointArc((13.330315166, 41.946539286), (14.630315166, 43.246539286), (15.930315166, 41.946539286))
            ThreePointArc((15.930315166, 41.946539286), (14.630315166, 40.646539286), (13.330315166, 41.946539286))
        make_face(mode=Mode.SUBTRACT)
    extrude(amount=SCREW_CATCHING_FUNNEL_2_DEPTH)
    # screw catching funnel 2: the draft: its side faces are tilted about the plane it starts from
    screw_catching_funnel_2_sides = [screw_catching_funnel_2_tool.faces().sort_by_distance(p)[0] for p in [
        (12.407815166, 41.946539286, 2.7205),
        (15.930315166, 41.946539286, 2.7205),
    ]]
    draft(screw_catching_funnel_2_sides, Plane.XY.offset(1.641), SCREW_CATCHING_FUNNEL_2_DRAFT)


with BuildPart() as part_5:
    add(part_4.part)

    # screw catching funnel 2: cut by screw_catching_funnel_2_tool
    add(screw_catching_funnel_2_tool.part, mode=Mode.SUBTRACT)


with BuildPart() as screw_catching_funnel_3_tool:
    # screw catching funnel 3 outline → screw catching funnel 3 (with draft: the straight prism first)
    with BuildSketch(Plane.XY.offset(1.641)):
        with Locations((-71.155751248, 41.946540419)):
            Circle(SCREW_CATCHING_FUNNEL_3_OUTLINE_R)
        with BuildLine():
            ThreePointArc((-72.455751248, 41.946540419), (-71.155751248, 43.246540419), (-69.855751248, 41.946540419))
            ThreePointArc((-69.855751248, 41.946540419), (-71.155751248, 40.646540419), (-72.455751248, 41.946540419))
        make_face(mode=Mode.SUBTRACT)
    extrude(amount=SCREW_CATCHING_FUNNEL_3_DEPTH)
    # screw catching funnel 3: the draft: its side faces are tilted about the plane it starts from
    screw_catching_funnel_3_sides = [screw_catching_funnel_3_tool.faces().sort_by_distance(p)[0] for p in [
        (-73.378251248, 41.946540419, 2.7205),
        (-69.855751248, 41.946540419, 2.7205),
    ]]
    draft(screw_catching_funnel_3_sides, Plane.XY.offset(1.641), SCREW_CATCHING_FUNNEL_3_DRAFT)


with BuildPart() as part_6:
    add(part_5.part)

    # screw catching funnel 3: cut by screw_catching_funnel_3_tool
    add(screw_catching_funnel_3_tool.part, mode=Mode.SUBTRACT)


with BuildPart() as screw_catching_funnel_4_tool:
    # screw catching funnel 4 outline → screw catching funnel 4 (with draft: the straight prism first)
    with BuildSketch(Plane.XY.offset(1.641)):
        with Locations((-71.155750897, 73.172606822)):
            Circle(SCREW_CATCHING_FUNNEL_4_OUTLINE_R)
        with BuildLine():
            ThreePointArc((-72.455750897, 73.172606822), (-71.155750897, 74.472606822), (-69.855750897, 73.172606822))
            ThreePointArc((-69.855750897, 73.172606822), (-71.155750897, 71.872606822), (-72.455750897, 73.172606822))
        make_face(mode=Mode.SUBTRACT)
    extrude(amount=SCREW_CATCHING_FUNNEL_4_DEPTH)
    # screw catching funnel 4: the draft: its side faces are tilted about the plane it starts from
    screw_catching_funnel_4_sides = [screw_catching_funnel_4_tool.faces().sort_by_distance(p)[0] for p in [
        (-73.378250897, 73.172606822, 2.7205),
        (-69.855750897, 73.172606822, 2.7205),
    ]]
    draft(screw_catching_funnel_4_sides, Plane.XY.offset(1.641), SCREW_CATCHING_FUNNEL_4_DRAFT)


with BuildPart() as part_7:
    add(part_6.part)

    # screw catching funnel 4: cut by screw_catching_funnel_4_tool
    add(screw_catching_funnel_4_tool.part, mode=Mode.SUBTRACT)


solid = part_7.part
